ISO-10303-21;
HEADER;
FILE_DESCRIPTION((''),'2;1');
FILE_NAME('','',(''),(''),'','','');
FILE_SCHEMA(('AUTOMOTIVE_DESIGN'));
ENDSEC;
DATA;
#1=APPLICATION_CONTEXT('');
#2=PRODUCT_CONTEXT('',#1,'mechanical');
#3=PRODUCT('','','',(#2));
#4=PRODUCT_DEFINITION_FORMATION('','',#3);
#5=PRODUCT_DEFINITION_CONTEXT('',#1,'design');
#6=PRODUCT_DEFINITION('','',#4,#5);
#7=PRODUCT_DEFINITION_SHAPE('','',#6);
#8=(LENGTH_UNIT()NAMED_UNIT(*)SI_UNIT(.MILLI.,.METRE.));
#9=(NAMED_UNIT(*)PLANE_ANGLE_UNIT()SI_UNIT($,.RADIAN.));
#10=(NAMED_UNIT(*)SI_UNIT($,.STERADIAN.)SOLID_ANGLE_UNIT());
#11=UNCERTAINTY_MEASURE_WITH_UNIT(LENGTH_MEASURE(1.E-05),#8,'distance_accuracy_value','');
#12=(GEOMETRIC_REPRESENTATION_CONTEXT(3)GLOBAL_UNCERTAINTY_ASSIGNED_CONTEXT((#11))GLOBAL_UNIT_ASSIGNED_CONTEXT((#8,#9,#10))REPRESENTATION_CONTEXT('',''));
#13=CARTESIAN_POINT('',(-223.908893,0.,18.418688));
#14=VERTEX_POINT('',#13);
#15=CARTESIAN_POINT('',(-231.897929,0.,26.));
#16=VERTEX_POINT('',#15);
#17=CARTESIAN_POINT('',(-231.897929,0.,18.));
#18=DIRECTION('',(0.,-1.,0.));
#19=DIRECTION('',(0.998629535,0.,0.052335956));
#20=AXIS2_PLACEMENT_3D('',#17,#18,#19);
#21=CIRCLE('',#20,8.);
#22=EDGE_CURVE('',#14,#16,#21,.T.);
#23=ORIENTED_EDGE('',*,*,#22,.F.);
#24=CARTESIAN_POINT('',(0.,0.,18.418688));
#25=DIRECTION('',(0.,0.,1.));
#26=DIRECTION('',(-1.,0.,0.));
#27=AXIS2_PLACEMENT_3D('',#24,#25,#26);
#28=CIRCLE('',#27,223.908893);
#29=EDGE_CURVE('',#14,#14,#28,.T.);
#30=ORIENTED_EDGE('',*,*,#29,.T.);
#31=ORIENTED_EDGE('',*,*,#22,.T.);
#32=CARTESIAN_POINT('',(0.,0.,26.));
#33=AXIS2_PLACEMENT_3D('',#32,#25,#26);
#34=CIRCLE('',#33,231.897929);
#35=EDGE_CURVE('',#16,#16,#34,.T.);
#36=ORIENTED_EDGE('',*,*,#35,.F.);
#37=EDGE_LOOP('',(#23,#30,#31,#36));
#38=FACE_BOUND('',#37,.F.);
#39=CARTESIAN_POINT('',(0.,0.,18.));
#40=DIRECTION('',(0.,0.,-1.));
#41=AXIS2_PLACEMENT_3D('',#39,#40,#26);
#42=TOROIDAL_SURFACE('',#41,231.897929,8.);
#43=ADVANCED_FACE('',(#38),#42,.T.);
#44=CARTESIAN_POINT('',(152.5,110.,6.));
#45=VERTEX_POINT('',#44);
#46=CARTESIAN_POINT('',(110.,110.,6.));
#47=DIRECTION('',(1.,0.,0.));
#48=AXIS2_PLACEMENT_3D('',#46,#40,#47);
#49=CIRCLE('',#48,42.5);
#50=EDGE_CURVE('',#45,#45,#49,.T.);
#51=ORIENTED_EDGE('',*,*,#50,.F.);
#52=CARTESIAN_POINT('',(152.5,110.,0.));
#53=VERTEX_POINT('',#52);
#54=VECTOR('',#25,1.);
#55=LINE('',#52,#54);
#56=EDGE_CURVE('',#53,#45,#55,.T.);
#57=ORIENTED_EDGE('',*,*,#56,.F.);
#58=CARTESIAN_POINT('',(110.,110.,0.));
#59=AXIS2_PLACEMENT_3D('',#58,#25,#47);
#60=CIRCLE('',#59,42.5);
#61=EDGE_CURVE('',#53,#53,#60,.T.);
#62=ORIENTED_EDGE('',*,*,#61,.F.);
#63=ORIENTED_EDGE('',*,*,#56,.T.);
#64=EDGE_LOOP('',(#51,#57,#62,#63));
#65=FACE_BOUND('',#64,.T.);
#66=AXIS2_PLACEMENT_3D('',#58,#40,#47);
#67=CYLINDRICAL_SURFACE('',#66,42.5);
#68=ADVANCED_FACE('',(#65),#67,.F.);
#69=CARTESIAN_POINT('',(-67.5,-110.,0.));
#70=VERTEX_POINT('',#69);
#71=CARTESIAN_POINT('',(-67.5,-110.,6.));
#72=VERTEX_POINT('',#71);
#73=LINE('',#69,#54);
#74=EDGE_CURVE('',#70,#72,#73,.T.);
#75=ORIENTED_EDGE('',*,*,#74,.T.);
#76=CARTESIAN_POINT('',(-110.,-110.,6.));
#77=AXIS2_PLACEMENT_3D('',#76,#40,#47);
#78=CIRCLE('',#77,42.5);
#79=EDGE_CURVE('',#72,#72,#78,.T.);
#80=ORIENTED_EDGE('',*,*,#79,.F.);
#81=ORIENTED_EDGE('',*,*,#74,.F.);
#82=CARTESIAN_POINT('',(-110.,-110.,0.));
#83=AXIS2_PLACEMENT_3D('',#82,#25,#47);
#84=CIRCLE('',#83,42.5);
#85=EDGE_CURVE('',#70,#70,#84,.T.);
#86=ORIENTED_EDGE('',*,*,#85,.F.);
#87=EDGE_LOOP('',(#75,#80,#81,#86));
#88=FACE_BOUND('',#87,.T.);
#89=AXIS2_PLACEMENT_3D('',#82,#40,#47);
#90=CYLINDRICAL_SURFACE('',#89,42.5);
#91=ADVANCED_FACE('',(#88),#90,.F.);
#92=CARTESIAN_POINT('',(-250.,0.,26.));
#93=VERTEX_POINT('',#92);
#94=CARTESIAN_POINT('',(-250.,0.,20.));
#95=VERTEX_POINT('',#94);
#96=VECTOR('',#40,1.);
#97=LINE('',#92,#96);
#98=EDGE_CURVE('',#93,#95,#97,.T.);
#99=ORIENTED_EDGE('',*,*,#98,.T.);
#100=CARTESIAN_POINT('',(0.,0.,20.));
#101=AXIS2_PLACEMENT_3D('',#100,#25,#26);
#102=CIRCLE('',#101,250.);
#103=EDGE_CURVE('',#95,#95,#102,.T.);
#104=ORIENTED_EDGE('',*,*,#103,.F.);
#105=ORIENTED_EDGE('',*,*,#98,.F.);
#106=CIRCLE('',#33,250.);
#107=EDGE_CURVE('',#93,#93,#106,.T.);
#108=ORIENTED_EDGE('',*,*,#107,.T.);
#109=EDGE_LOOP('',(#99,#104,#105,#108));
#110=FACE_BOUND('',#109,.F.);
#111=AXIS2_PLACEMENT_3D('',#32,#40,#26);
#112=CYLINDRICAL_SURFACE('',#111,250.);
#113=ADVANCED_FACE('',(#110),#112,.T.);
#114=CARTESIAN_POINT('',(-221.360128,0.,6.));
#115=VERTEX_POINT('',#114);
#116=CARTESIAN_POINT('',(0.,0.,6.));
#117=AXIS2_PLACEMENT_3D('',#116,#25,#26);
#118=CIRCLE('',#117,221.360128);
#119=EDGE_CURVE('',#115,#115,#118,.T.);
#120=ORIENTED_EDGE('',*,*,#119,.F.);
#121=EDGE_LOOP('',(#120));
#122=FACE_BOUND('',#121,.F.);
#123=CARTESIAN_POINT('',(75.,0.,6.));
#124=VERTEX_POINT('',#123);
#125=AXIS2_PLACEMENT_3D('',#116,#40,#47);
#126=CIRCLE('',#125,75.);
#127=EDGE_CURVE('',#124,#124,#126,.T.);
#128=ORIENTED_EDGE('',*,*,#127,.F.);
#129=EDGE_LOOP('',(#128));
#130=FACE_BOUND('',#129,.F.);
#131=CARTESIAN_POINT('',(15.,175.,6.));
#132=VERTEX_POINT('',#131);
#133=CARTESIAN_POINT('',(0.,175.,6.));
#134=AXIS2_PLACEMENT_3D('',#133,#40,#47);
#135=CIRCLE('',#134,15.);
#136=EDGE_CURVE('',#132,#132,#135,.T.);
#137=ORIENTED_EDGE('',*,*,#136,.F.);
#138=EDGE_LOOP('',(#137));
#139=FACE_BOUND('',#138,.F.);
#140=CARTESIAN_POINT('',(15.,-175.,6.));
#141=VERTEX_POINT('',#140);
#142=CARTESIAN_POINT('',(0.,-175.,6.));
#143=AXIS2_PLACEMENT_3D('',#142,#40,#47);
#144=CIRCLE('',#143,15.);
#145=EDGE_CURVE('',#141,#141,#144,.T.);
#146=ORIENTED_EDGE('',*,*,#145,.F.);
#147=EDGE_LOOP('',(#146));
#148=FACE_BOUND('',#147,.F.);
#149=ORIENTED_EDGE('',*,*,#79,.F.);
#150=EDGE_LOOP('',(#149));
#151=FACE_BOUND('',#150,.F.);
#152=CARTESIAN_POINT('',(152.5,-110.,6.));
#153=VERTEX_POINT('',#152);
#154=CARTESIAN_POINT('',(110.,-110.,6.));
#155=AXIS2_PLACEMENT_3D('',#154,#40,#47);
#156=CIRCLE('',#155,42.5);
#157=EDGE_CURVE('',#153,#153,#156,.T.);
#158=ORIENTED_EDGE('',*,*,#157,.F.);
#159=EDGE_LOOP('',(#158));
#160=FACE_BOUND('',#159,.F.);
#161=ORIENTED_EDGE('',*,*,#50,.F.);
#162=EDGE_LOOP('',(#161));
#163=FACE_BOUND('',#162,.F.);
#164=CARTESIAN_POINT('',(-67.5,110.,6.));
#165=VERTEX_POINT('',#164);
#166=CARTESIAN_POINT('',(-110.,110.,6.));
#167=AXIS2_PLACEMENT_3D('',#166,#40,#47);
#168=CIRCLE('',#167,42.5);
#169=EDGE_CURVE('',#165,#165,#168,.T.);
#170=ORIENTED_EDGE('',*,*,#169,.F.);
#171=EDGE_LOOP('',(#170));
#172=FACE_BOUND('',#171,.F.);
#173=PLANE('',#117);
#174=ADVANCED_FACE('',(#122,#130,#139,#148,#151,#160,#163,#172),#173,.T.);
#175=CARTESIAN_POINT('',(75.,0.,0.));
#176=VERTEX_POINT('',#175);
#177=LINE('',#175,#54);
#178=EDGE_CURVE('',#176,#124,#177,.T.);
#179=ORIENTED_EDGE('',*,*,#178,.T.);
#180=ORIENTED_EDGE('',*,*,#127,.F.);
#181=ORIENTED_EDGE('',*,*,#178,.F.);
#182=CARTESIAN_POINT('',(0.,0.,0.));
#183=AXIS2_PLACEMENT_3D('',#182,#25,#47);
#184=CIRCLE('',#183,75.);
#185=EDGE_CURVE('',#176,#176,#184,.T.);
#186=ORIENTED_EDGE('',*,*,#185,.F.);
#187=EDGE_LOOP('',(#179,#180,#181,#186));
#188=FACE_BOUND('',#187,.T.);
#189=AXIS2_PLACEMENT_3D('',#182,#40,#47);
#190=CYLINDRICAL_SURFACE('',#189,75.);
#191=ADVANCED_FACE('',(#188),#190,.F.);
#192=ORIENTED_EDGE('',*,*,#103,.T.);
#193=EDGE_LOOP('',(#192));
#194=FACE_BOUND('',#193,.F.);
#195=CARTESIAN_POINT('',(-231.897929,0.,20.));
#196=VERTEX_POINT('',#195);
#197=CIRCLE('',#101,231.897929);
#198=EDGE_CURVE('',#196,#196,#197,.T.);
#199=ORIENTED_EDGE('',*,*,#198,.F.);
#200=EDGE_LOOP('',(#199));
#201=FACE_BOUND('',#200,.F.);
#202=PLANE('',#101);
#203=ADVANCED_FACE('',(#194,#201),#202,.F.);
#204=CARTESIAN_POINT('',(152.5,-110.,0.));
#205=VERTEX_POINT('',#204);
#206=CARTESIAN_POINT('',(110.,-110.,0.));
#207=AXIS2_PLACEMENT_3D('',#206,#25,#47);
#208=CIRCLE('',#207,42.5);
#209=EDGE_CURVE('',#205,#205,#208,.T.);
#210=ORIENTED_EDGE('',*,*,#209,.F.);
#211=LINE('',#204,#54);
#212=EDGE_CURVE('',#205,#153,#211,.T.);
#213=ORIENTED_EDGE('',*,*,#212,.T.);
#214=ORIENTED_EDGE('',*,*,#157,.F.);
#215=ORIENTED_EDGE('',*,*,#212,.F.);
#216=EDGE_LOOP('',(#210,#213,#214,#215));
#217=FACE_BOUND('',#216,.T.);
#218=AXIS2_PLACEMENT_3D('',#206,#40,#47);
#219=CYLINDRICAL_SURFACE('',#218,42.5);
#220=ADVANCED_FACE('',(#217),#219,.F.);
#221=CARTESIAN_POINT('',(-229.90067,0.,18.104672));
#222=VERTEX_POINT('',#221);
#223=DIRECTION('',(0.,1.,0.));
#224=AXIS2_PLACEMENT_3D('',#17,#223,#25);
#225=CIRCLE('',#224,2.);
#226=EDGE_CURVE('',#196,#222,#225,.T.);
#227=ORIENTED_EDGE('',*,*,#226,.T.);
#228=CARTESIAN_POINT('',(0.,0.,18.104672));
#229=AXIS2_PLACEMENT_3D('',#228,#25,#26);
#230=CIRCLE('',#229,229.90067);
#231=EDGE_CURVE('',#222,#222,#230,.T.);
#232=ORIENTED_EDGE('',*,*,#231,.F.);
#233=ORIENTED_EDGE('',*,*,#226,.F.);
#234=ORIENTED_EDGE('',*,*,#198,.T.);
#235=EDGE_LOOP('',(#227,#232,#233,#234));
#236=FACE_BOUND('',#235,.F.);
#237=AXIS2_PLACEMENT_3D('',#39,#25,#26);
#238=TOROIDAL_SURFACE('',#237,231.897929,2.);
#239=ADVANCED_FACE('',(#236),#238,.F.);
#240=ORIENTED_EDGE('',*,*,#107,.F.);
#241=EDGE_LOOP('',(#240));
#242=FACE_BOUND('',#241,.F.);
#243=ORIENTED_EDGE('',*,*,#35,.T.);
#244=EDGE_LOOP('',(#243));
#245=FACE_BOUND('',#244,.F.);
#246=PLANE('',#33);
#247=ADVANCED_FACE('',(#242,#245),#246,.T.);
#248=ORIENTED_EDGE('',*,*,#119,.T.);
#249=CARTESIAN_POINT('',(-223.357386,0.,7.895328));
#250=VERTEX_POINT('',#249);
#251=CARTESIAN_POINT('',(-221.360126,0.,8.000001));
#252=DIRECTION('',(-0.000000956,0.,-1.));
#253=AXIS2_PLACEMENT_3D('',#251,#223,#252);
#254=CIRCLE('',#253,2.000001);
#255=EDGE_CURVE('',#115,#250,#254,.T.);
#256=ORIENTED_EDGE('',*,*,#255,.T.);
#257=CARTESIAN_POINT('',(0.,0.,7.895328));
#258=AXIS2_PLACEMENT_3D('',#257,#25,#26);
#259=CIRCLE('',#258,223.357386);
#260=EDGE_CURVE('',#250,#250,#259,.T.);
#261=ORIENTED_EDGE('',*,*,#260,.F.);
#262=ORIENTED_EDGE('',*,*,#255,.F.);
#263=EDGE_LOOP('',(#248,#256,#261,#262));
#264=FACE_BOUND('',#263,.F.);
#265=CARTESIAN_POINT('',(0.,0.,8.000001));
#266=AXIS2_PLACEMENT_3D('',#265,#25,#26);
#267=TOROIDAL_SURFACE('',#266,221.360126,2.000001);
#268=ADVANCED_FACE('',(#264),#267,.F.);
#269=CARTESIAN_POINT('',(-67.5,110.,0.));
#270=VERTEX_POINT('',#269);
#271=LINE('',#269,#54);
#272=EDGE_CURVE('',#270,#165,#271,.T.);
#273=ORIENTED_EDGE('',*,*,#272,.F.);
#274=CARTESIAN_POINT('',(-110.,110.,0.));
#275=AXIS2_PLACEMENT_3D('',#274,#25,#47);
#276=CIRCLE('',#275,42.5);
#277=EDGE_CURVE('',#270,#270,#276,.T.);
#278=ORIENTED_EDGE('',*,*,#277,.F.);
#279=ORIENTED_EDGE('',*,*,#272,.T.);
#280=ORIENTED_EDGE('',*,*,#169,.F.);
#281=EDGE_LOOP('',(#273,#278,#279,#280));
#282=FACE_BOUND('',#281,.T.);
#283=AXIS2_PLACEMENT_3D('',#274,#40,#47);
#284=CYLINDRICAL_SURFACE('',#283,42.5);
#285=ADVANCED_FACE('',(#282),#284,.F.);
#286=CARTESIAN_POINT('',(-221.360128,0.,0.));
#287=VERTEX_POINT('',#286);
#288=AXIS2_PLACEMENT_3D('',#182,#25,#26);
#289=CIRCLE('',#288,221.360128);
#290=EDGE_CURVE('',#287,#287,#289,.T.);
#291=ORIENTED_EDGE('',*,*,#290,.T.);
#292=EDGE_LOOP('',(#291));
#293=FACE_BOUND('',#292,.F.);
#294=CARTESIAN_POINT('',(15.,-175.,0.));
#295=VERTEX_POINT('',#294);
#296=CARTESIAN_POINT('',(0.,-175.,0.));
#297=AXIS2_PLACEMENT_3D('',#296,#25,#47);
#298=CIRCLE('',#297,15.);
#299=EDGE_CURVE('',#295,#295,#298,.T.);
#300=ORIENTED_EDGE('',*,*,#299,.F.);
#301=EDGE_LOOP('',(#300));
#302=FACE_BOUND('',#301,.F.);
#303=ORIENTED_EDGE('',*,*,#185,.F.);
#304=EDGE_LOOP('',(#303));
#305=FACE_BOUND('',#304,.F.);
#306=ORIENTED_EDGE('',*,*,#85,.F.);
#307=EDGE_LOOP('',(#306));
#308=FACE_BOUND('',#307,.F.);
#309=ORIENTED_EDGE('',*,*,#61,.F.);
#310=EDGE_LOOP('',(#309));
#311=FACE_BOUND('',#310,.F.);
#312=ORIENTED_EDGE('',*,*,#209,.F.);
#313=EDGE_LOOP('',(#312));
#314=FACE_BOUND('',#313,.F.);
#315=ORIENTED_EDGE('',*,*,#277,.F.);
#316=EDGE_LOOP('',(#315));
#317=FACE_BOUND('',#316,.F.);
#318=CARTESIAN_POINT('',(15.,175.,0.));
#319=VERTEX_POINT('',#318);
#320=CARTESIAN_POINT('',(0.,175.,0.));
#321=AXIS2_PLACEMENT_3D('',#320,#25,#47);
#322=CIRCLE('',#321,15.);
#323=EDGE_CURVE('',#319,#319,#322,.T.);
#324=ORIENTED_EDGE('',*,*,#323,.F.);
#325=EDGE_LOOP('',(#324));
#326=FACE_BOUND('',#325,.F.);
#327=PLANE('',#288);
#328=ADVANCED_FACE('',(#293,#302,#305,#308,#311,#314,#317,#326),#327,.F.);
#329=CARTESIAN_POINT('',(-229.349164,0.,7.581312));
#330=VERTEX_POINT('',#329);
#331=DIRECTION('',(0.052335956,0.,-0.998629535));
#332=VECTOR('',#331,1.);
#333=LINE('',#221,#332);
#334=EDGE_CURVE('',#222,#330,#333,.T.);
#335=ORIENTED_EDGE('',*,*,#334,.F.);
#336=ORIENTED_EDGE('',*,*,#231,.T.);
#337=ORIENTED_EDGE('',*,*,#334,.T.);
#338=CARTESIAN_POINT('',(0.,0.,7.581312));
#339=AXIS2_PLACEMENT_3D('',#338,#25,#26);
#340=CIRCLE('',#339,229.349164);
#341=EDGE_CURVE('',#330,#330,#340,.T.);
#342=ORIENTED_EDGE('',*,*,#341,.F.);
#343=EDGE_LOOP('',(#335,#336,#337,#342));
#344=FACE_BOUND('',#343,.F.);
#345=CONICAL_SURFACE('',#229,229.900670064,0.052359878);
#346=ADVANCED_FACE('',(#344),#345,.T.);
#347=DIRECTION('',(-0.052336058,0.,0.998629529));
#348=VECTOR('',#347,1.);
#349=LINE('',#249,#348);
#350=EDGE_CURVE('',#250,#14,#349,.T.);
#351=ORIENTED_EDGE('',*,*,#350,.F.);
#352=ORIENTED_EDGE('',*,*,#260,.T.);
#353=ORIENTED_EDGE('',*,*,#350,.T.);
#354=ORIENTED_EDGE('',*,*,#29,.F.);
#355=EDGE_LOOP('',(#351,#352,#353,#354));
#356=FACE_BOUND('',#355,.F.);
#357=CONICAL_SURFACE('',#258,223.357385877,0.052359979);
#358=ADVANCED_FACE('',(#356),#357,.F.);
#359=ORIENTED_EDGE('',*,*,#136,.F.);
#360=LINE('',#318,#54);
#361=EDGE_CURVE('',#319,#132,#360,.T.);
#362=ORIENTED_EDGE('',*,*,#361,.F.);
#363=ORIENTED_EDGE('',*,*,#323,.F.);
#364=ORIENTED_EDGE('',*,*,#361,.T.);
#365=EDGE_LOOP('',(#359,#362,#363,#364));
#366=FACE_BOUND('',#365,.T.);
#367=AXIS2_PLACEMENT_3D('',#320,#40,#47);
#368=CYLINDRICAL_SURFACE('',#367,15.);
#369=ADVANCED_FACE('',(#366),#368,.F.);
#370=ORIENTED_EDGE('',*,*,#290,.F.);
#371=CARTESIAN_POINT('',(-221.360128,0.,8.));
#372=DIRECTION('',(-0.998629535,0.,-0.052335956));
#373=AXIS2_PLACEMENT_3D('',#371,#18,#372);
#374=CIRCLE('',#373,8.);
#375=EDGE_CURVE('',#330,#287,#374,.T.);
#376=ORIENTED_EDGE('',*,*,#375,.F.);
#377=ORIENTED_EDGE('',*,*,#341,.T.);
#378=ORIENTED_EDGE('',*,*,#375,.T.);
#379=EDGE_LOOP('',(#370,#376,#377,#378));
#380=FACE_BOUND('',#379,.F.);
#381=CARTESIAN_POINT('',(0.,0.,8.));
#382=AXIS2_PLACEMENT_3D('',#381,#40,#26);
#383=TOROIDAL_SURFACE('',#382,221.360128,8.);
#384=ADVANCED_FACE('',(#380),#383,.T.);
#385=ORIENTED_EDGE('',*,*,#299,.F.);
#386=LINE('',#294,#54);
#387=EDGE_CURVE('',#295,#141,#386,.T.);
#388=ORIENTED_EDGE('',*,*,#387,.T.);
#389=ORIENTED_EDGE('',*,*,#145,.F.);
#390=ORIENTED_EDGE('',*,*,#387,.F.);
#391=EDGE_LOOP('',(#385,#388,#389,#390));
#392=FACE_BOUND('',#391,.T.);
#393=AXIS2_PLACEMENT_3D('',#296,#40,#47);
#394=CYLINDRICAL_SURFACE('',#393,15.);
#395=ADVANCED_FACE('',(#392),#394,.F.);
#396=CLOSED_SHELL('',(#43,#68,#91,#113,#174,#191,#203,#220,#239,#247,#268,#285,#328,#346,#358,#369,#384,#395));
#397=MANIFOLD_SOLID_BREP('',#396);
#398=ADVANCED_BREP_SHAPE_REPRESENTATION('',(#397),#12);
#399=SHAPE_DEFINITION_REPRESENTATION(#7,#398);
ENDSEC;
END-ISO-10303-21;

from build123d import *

# Parameters (mm, degrees)
F2_R     = 42.5
F2_R_2   = 75
F2_R_3   = 15
F3_DEPTH = 25


# Not quite as in the source:
# - ends of sketch curves that miss each other by under 0.0002 mm in the source are joined


with BuildPart() as f1:
    # F0 (on Front) → F1 (revolve)
    with BuildSketch(Plane.XZ):
        with BuildLine():
            Line((-221.3601278806, 0), (0, 0))
            Line((0, 0), (0, 6))
            Line((0, 6), (-221.3601278806, 6))
            ThreePointArc((-221.3601278806, 6), (-222.7368362926, 6.5492520372), (-223.3573858774, 7.8953281437))
            Line((-223.3573858774, 7.8953281437), (-223.9088928554, 18.4186876499))
            ThreePointArc((-223.9088928554, 18.4186876499), (-226.3910925279, 23.8029949681), (-231.8979291334, 26))
            Line((-231.8979291334, 26), (-250, 26))
            Line((-250, 26), (-250, 20))
            Line((-250, 20), (-231.8979291334, 20))
            ThreePointArc((-231.8979291334, 20), (-230.521219982, 19.450748742), (-229.9006700639, 18.1046719125))
            Line((-229.9006700639, 18.1046719125), (-229.3491641587, 7.5813123501))
            ThreePointArc((-229.3491641587, 7.5813123501), (-226.8669644862, 2.1970050319), (-221.3601278806, 0))
        make_face()
    revolve(axis=Axis((0, 0, 34.008089453), (0, 0, 1)))

    # F2 (on Top) → F3 (cut)
    with BuildSketch(Plane.XY):
        with Locations((-110, -110)):
            Circle(F2_R)
        with Locations((110, -110)):
            Circle(F2_R)
        with Locations((110, 110)):
            Circle(F2_R)
        with Locations((-110, 110)):
            Circle(F2_R)
        Circle(F2_R_2)
        with Locations((0, -175)):
            Circle(F2_R_3)
        with Locations((0, 175)):
            Circle(F2_R_3)
    extrude(amount=F3_DEPTH, mode=Mode.SUBTRACT)


solid = f1.part
